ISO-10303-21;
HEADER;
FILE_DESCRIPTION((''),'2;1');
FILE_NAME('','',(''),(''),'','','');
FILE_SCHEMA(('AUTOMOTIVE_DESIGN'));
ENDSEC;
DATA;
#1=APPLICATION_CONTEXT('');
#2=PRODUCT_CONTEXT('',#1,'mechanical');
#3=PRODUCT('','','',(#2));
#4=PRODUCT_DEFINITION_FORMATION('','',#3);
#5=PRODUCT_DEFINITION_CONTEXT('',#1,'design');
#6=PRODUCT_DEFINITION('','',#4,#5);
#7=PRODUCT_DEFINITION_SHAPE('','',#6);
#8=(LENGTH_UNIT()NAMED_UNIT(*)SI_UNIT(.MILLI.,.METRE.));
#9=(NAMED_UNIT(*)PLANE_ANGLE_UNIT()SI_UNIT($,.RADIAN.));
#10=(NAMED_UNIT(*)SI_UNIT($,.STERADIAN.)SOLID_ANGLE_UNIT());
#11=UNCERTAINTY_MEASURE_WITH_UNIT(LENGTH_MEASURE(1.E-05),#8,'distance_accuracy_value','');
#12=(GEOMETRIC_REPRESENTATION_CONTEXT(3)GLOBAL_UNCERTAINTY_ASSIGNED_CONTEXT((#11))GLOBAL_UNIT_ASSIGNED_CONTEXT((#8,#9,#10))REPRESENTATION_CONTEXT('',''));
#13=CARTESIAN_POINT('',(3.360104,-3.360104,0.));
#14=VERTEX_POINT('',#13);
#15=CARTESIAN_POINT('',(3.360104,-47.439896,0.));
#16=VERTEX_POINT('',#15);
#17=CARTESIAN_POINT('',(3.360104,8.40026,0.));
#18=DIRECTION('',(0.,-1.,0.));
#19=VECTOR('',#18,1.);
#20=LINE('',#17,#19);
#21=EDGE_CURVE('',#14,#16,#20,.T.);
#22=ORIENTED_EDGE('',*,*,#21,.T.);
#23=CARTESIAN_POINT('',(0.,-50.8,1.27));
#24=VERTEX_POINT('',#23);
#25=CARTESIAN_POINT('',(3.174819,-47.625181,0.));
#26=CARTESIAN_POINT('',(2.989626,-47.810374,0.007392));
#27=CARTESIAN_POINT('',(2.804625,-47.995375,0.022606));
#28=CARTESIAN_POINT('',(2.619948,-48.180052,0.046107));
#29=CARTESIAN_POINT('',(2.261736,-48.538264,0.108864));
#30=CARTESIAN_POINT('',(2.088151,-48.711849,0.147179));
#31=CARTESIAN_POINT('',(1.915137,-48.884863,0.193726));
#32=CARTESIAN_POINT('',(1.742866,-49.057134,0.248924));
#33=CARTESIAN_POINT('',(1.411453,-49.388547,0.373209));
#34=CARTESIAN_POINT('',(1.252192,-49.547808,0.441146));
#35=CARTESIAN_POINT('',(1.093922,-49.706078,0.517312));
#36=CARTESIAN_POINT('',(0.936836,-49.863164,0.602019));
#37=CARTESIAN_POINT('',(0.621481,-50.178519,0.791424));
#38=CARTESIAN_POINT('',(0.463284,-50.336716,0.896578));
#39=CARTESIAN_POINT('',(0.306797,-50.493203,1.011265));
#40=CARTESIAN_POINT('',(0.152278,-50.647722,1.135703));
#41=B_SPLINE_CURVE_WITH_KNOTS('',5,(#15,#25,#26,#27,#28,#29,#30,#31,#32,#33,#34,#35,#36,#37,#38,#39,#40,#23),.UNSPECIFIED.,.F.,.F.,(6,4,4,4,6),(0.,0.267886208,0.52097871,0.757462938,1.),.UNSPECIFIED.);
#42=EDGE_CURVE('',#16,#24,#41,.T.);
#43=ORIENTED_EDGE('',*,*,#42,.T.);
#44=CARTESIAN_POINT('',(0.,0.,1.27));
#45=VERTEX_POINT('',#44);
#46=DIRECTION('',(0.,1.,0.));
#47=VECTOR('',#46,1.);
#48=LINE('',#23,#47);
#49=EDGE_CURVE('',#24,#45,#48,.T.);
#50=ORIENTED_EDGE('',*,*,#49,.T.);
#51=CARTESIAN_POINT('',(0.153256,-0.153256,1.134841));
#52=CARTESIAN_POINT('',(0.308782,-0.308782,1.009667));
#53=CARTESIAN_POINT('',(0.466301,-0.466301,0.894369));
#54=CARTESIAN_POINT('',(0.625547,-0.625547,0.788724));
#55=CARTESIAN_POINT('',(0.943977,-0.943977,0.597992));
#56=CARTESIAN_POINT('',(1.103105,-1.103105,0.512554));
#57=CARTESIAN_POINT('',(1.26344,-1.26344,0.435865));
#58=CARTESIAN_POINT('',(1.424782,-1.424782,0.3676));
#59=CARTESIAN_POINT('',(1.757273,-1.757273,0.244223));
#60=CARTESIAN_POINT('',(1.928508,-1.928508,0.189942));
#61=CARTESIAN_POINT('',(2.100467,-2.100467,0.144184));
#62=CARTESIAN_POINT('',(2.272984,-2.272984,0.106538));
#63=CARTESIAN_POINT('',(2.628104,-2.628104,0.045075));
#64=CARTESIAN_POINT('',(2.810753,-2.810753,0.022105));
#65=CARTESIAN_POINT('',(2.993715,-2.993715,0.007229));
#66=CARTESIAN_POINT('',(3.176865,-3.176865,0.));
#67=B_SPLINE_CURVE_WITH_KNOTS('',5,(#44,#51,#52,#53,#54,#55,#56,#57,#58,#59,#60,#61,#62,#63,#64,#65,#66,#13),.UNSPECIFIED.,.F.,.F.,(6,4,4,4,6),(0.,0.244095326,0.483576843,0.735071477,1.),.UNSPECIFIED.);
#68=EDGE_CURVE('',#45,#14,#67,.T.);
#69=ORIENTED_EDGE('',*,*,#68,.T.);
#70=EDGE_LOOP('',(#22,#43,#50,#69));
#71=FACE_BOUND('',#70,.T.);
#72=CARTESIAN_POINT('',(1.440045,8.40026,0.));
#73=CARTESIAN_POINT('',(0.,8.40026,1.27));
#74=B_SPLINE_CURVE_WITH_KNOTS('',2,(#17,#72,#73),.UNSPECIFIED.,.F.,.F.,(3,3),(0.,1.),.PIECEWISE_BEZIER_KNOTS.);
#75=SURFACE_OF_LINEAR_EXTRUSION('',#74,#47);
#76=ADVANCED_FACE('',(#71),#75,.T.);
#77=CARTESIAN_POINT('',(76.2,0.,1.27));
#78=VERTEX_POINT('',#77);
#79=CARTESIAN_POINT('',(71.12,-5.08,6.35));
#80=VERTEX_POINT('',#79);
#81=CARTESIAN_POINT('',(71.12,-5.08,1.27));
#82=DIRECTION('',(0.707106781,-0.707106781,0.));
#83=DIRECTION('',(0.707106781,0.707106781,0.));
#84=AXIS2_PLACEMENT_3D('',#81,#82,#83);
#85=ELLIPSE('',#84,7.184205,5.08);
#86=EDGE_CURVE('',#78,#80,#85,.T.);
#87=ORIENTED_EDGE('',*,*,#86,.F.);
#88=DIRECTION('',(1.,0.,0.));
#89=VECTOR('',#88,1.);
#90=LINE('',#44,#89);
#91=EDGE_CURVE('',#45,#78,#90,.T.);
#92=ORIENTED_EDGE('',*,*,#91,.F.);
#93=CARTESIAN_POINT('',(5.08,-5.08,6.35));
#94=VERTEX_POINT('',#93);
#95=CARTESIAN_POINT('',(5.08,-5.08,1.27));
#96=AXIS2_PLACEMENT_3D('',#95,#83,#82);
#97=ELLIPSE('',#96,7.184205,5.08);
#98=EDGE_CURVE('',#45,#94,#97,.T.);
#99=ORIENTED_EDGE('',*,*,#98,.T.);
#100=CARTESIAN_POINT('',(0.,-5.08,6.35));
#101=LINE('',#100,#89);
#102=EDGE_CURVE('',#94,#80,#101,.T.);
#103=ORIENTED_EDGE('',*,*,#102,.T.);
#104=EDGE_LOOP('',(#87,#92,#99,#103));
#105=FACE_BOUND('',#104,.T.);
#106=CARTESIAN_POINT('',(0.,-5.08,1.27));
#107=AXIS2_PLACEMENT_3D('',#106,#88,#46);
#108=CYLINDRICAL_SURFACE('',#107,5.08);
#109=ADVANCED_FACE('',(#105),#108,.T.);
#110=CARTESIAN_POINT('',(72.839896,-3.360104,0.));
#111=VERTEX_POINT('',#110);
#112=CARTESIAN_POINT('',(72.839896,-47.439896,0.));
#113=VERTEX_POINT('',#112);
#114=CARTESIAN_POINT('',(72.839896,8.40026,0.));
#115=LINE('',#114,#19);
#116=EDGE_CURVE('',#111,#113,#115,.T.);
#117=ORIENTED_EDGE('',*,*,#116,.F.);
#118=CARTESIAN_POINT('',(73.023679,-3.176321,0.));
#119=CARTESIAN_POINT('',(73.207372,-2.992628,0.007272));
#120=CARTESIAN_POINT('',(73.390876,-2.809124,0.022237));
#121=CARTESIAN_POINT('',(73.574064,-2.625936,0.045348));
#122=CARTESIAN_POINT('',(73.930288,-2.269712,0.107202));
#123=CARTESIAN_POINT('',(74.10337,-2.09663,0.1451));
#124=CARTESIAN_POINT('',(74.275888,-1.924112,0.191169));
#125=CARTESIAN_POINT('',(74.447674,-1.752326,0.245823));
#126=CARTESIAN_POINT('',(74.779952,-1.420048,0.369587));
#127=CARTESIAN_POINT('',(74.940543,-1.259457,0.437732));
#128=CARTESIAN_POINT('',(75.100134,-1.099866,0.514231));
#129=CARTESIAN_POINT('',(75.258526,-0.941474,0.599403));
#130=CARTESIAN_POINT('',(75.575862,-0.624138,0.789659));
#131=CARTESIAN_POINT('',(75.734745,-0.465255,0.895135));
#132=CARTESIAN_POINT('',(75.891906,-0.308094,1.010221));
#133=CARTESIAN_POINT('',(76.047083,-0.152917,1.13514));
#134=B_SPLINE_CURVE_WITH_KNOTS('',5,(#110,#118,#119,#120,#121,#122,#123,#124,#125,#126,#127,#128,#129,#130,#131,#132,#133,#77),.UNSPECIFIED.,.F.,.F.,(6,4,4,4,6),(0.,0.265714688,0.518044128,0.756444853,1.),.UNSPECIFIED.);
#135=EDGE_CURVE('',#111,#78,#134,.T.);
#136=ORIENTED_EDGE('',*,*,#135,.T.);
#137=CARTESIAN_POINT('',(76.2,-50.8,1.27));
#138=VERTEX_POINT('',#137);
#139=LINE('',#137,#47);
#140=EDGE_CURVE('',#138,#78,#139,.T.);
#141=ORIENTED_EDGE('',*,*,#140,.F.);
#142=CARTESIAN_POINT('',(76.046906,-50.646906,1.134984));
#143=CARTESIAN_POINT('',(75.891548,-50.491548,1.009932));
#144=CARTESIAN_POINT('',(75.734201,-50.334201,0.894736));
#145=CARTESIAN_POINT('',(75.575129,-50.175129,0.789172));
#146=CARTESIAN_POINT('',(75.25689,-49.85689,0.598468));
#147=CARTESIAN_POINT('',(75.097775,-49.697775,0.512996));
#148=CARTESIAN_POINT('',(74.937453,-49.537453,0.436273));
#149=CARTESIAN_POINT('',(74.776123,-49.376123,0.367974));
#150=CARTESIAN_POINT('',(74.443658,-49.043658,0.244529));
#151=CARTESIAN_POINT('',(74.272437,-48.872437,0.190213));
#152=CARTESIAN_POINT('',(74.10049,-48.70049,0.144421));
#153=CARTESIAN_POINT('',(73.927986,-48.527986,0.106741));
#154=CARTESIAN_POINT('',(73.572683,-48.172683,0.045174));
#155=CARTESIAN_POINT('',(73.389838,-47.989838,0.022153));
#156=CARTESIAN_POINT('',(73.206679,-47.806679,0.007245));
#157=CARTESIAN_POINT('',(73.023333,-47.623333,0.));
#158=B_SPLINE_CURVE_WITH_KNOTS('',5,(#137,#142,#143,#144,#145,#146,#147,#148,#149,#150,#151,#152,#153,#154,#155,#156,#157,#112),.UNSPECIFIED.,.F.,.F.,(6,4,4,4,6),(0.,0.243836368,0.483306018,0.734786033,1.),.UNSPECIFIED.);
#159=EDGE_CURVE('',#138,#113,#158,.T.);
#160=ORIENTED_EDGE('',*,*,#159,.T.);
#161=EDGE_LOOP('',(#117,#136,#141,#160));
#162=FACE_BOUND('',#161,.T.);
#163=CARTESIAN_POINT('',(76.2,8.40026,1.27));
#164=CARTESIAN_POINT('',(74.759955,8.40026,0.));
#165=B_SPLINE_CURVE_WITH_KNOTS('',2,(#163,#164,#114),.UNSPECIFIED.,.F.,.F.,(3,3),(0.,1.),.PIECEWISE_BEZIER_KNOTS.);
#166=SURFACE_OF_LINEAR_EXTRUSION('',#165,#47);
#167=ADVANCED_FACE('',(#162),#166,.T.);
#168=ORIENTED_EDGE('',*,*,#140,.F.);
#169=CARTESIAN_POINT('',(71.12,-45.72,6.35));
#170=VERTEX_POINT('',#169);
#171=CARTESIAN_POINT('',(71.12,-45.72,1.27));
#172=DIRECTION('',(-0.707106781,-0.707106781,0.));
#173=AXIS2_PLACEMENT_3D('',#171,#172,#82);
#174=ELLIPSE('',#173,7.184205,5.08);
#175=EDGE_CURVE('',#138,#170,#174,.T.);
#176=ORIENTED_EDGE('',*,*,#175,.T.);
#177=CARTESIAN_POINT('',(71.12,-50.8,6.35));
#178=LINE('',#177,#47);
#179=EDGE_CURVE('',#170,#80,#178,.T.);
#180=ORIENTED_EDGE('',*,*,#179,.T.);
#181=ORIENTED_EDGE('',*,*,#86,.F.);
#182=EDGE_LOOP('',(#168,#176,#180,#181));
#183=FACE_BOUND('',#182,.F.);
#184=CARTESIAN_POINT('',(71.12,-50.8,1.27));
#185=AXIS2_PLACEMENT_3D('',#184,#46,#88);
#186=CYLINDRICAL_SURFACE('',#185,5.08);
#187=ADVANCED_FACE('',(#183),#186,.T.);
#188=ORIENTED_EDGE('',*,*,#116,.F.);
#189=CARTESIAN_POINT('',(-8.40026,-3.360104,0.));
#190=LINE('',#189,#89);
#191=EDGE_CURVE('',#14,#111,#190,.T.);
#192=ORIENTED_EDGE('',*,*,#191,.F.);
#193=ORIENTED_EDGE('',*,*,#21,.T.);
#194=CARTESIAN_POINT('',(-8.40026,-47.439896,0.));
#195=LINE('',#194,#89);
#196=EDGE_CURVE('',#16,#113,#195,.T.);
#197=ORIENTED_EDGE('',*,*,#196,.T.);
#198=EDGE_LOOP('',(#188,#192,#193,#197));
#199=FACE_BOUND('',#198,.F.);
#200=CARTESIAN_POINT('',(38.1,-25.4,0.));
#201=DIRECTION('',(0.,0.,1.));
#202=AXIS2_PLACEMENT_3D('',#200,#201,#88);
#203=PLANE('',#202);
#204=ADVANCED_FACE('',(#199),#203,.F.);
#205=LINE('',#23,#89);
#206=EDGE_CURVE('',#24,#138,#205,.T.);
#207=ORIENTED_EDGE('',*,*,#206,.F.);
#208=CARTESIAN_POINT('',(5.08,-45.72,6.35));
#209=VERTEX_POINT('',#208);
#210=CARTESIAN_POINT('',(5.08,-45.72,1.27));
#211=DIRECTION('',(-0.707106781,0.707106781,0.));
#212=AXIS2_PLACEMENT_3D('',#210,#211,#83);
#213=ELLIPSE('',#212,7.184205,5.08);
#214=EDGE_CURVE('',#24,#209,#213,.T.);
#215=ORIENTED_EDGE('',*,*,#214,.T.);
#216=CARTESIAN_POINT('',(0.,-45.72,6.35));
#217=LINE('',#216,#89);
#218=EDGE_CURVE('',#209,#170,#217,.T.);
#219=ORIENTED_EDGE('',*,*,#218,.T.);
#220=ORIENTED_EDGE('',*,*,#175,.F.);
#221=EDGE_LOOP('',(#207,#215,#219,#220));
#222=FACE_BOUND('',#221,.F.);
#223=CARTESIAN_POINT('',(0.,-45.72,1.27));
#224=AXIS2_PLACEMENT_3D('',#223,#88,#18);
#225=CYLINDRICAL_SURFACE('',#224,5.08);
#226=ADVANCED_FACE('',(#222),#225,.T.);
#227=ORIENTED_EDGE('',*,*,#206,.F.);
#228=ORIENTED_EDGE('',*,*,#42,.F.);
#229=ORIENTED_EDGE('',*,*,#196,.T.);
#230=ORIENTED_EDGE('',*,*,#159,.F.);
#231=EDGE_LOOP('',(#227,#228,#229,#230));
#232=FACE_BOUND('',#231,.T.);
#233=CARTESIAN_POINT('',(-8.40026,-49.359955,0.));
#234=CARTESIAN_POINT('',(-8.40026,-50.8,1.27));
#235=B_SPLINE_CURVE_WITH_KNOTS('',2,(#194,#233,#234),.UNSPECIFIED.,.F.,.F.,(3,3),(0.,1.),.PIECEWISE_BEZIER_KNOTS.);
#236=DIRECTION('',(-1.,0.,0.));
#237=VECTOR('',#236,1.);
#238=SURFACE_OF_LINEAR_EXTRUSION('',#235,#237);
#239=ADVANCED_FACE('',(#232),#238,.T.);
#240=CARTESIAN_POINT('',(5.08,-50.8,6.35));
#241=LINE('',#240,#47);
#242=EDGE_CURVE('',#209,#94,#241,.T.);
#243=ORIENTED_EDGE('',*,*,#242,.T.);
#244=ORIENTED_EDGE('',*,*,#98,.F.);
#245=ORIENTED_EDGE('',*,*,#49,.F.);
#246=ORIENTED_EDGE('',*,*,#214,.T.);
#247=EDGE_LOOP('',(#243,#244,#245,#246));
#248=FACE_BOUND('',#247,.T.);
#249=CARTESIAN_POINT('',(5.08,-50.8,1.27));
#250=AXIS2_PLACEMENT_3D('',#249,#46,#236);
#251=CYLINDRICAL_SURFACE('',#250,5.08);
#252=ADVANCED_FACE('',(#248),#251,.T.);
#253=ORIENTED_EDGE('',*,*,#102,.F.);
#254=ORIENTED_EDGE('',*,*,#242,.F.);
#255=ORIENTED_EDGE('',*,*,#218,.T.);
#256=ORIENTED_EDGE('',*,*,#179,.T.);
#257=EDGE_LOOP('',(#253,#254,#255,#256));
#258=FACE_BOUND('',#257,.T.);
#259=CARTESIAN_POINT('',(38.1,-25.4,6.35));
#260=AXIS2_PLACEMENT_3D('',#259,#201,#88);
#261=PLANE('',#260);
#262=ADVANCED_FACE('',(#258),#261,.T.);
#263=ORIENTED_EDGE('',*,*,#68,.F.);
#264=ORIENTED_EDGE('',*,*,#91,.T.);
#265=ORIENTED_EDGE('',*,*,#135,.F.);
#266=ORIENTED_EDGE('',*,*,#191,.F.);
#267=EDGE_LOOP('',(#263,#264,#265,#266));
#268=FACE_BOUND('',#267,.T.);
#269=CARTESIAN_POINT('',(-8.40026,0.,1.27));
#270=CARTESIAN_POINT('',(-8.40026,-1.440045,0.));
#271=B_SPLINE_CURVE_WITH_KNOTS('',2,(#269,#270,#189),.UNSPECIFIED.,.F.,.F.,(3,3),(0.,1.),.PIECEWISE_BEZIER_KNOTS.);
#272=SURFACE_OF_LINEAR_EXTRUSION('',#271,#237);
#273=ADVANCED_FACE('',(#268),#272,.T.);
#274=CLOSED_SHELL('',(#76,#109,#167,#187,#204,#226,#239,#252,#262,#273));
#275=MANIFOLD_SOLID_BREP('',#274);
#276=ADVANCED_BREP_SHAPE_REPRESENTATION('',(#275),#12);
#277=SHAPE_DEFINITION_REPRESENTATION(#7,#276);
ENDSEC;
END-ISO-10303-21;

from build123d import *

# Parameters (mm, degrees)
F0_W        = 76.2
F0_H        = 50.8
F1_DEPTH    = 6.35
F2_R        = 5.08
F3_T1_DEPTH = 93.0005208253
F3_T3_DEPTH = 67.6005208253


# Not quite as in the source:
# - a fillet or chamfer that OpenCascade refuses, or shapes differently, is made with other operations: its cross-section is extruded or revolved along the edge and cut away or added


with BuildPart() as f1:
    # F0 (on Top) → F1 (new body)
    with BuildSketch(Plane.XY):
        with Locations((38.1, -25.4)):
            Rectangle(F0_W, F0_H)
    extrude(amount=F1_DEPTH)

    # F2
    f2_edges = [f1.edges().sort_by_distance(p)[0] for p in [
        (38.1, 0, 6.35),
        (0, -25.4, 6.35),
        (38.1, -50.8, 6.35),
        (76.2, -25.4, 6.35),
    ]]
    fillet(f2_edges, radius=F2_R)

    # F3: fillet of radius 5.08 on 4 edges, made by hand

    # F3_s2 → F3_t1 (cut)
    with BuildSketch(Plane.YZ.offset(-8.4002604126)):
        with BuildLine():
            add(Edge.make_bspline(
                [(0, 1.27), (-1.4400446422, 0), (-3.3601041651, 0)],
                knots=[0, 0, 0, 1, 1, 1], degree=2, weights=[1, 1, 1]))
            Line((-3.3601041651, 0), (0, 0))
            Line((0, 0), (0, 1.27))
        make_face()
        with BuildLine():
            add(Edge.make_bspline(
                [(-47.4398958349, 0), (-49.3599553578, 0), (-50.8, 1.27)],
                knots=[0, 0, 0, 1, 1, 1], degree=2, weights=[1, 1, 1]))
            Line((-50.8, 1.27), (-50.8, 0))
            Line((-50.8, 0), (-47.4398958349, 0))
        make_face()
    extrude(amount=F3_T1_DEPTH, mode=Mode.SUBTRACT)

    # F3_s4 → F3_t3 (cut)
    with BuildSketch(Plane.XZ.offset(-8.4002604126)):
        with BuildLine():
            add(Edge.make_bspline(
                [(3.3601041651, 0), (1.4400446422, 0), (0, 1.27)],
                knots=[0, 0, 0, 1, 1, 1], degree=2, weights=[1, 1, 1]))
            Line((0, 1.27), (0, 0))
            Line((0, 0), (3.3601041651, 0))
        make_face()
        with BuildLine():
            add(Edge.make_bspline(
                [(76.2, 1.27), (74.7599553578, 0), (72.8398958349, 0)],
                knots=[0, 0, 0, 1, 1, 1], degree=2, weights=[1, 1, 1]))
            Line((72.8398958349, 0), (76.2, 0))
            Line((76.2, 0), (76.2, 1.27))
        make_face()
    extrude(amount=F3_T3_DEPTH, mode=Mode.SUBTRACT)


solid = f1.part
